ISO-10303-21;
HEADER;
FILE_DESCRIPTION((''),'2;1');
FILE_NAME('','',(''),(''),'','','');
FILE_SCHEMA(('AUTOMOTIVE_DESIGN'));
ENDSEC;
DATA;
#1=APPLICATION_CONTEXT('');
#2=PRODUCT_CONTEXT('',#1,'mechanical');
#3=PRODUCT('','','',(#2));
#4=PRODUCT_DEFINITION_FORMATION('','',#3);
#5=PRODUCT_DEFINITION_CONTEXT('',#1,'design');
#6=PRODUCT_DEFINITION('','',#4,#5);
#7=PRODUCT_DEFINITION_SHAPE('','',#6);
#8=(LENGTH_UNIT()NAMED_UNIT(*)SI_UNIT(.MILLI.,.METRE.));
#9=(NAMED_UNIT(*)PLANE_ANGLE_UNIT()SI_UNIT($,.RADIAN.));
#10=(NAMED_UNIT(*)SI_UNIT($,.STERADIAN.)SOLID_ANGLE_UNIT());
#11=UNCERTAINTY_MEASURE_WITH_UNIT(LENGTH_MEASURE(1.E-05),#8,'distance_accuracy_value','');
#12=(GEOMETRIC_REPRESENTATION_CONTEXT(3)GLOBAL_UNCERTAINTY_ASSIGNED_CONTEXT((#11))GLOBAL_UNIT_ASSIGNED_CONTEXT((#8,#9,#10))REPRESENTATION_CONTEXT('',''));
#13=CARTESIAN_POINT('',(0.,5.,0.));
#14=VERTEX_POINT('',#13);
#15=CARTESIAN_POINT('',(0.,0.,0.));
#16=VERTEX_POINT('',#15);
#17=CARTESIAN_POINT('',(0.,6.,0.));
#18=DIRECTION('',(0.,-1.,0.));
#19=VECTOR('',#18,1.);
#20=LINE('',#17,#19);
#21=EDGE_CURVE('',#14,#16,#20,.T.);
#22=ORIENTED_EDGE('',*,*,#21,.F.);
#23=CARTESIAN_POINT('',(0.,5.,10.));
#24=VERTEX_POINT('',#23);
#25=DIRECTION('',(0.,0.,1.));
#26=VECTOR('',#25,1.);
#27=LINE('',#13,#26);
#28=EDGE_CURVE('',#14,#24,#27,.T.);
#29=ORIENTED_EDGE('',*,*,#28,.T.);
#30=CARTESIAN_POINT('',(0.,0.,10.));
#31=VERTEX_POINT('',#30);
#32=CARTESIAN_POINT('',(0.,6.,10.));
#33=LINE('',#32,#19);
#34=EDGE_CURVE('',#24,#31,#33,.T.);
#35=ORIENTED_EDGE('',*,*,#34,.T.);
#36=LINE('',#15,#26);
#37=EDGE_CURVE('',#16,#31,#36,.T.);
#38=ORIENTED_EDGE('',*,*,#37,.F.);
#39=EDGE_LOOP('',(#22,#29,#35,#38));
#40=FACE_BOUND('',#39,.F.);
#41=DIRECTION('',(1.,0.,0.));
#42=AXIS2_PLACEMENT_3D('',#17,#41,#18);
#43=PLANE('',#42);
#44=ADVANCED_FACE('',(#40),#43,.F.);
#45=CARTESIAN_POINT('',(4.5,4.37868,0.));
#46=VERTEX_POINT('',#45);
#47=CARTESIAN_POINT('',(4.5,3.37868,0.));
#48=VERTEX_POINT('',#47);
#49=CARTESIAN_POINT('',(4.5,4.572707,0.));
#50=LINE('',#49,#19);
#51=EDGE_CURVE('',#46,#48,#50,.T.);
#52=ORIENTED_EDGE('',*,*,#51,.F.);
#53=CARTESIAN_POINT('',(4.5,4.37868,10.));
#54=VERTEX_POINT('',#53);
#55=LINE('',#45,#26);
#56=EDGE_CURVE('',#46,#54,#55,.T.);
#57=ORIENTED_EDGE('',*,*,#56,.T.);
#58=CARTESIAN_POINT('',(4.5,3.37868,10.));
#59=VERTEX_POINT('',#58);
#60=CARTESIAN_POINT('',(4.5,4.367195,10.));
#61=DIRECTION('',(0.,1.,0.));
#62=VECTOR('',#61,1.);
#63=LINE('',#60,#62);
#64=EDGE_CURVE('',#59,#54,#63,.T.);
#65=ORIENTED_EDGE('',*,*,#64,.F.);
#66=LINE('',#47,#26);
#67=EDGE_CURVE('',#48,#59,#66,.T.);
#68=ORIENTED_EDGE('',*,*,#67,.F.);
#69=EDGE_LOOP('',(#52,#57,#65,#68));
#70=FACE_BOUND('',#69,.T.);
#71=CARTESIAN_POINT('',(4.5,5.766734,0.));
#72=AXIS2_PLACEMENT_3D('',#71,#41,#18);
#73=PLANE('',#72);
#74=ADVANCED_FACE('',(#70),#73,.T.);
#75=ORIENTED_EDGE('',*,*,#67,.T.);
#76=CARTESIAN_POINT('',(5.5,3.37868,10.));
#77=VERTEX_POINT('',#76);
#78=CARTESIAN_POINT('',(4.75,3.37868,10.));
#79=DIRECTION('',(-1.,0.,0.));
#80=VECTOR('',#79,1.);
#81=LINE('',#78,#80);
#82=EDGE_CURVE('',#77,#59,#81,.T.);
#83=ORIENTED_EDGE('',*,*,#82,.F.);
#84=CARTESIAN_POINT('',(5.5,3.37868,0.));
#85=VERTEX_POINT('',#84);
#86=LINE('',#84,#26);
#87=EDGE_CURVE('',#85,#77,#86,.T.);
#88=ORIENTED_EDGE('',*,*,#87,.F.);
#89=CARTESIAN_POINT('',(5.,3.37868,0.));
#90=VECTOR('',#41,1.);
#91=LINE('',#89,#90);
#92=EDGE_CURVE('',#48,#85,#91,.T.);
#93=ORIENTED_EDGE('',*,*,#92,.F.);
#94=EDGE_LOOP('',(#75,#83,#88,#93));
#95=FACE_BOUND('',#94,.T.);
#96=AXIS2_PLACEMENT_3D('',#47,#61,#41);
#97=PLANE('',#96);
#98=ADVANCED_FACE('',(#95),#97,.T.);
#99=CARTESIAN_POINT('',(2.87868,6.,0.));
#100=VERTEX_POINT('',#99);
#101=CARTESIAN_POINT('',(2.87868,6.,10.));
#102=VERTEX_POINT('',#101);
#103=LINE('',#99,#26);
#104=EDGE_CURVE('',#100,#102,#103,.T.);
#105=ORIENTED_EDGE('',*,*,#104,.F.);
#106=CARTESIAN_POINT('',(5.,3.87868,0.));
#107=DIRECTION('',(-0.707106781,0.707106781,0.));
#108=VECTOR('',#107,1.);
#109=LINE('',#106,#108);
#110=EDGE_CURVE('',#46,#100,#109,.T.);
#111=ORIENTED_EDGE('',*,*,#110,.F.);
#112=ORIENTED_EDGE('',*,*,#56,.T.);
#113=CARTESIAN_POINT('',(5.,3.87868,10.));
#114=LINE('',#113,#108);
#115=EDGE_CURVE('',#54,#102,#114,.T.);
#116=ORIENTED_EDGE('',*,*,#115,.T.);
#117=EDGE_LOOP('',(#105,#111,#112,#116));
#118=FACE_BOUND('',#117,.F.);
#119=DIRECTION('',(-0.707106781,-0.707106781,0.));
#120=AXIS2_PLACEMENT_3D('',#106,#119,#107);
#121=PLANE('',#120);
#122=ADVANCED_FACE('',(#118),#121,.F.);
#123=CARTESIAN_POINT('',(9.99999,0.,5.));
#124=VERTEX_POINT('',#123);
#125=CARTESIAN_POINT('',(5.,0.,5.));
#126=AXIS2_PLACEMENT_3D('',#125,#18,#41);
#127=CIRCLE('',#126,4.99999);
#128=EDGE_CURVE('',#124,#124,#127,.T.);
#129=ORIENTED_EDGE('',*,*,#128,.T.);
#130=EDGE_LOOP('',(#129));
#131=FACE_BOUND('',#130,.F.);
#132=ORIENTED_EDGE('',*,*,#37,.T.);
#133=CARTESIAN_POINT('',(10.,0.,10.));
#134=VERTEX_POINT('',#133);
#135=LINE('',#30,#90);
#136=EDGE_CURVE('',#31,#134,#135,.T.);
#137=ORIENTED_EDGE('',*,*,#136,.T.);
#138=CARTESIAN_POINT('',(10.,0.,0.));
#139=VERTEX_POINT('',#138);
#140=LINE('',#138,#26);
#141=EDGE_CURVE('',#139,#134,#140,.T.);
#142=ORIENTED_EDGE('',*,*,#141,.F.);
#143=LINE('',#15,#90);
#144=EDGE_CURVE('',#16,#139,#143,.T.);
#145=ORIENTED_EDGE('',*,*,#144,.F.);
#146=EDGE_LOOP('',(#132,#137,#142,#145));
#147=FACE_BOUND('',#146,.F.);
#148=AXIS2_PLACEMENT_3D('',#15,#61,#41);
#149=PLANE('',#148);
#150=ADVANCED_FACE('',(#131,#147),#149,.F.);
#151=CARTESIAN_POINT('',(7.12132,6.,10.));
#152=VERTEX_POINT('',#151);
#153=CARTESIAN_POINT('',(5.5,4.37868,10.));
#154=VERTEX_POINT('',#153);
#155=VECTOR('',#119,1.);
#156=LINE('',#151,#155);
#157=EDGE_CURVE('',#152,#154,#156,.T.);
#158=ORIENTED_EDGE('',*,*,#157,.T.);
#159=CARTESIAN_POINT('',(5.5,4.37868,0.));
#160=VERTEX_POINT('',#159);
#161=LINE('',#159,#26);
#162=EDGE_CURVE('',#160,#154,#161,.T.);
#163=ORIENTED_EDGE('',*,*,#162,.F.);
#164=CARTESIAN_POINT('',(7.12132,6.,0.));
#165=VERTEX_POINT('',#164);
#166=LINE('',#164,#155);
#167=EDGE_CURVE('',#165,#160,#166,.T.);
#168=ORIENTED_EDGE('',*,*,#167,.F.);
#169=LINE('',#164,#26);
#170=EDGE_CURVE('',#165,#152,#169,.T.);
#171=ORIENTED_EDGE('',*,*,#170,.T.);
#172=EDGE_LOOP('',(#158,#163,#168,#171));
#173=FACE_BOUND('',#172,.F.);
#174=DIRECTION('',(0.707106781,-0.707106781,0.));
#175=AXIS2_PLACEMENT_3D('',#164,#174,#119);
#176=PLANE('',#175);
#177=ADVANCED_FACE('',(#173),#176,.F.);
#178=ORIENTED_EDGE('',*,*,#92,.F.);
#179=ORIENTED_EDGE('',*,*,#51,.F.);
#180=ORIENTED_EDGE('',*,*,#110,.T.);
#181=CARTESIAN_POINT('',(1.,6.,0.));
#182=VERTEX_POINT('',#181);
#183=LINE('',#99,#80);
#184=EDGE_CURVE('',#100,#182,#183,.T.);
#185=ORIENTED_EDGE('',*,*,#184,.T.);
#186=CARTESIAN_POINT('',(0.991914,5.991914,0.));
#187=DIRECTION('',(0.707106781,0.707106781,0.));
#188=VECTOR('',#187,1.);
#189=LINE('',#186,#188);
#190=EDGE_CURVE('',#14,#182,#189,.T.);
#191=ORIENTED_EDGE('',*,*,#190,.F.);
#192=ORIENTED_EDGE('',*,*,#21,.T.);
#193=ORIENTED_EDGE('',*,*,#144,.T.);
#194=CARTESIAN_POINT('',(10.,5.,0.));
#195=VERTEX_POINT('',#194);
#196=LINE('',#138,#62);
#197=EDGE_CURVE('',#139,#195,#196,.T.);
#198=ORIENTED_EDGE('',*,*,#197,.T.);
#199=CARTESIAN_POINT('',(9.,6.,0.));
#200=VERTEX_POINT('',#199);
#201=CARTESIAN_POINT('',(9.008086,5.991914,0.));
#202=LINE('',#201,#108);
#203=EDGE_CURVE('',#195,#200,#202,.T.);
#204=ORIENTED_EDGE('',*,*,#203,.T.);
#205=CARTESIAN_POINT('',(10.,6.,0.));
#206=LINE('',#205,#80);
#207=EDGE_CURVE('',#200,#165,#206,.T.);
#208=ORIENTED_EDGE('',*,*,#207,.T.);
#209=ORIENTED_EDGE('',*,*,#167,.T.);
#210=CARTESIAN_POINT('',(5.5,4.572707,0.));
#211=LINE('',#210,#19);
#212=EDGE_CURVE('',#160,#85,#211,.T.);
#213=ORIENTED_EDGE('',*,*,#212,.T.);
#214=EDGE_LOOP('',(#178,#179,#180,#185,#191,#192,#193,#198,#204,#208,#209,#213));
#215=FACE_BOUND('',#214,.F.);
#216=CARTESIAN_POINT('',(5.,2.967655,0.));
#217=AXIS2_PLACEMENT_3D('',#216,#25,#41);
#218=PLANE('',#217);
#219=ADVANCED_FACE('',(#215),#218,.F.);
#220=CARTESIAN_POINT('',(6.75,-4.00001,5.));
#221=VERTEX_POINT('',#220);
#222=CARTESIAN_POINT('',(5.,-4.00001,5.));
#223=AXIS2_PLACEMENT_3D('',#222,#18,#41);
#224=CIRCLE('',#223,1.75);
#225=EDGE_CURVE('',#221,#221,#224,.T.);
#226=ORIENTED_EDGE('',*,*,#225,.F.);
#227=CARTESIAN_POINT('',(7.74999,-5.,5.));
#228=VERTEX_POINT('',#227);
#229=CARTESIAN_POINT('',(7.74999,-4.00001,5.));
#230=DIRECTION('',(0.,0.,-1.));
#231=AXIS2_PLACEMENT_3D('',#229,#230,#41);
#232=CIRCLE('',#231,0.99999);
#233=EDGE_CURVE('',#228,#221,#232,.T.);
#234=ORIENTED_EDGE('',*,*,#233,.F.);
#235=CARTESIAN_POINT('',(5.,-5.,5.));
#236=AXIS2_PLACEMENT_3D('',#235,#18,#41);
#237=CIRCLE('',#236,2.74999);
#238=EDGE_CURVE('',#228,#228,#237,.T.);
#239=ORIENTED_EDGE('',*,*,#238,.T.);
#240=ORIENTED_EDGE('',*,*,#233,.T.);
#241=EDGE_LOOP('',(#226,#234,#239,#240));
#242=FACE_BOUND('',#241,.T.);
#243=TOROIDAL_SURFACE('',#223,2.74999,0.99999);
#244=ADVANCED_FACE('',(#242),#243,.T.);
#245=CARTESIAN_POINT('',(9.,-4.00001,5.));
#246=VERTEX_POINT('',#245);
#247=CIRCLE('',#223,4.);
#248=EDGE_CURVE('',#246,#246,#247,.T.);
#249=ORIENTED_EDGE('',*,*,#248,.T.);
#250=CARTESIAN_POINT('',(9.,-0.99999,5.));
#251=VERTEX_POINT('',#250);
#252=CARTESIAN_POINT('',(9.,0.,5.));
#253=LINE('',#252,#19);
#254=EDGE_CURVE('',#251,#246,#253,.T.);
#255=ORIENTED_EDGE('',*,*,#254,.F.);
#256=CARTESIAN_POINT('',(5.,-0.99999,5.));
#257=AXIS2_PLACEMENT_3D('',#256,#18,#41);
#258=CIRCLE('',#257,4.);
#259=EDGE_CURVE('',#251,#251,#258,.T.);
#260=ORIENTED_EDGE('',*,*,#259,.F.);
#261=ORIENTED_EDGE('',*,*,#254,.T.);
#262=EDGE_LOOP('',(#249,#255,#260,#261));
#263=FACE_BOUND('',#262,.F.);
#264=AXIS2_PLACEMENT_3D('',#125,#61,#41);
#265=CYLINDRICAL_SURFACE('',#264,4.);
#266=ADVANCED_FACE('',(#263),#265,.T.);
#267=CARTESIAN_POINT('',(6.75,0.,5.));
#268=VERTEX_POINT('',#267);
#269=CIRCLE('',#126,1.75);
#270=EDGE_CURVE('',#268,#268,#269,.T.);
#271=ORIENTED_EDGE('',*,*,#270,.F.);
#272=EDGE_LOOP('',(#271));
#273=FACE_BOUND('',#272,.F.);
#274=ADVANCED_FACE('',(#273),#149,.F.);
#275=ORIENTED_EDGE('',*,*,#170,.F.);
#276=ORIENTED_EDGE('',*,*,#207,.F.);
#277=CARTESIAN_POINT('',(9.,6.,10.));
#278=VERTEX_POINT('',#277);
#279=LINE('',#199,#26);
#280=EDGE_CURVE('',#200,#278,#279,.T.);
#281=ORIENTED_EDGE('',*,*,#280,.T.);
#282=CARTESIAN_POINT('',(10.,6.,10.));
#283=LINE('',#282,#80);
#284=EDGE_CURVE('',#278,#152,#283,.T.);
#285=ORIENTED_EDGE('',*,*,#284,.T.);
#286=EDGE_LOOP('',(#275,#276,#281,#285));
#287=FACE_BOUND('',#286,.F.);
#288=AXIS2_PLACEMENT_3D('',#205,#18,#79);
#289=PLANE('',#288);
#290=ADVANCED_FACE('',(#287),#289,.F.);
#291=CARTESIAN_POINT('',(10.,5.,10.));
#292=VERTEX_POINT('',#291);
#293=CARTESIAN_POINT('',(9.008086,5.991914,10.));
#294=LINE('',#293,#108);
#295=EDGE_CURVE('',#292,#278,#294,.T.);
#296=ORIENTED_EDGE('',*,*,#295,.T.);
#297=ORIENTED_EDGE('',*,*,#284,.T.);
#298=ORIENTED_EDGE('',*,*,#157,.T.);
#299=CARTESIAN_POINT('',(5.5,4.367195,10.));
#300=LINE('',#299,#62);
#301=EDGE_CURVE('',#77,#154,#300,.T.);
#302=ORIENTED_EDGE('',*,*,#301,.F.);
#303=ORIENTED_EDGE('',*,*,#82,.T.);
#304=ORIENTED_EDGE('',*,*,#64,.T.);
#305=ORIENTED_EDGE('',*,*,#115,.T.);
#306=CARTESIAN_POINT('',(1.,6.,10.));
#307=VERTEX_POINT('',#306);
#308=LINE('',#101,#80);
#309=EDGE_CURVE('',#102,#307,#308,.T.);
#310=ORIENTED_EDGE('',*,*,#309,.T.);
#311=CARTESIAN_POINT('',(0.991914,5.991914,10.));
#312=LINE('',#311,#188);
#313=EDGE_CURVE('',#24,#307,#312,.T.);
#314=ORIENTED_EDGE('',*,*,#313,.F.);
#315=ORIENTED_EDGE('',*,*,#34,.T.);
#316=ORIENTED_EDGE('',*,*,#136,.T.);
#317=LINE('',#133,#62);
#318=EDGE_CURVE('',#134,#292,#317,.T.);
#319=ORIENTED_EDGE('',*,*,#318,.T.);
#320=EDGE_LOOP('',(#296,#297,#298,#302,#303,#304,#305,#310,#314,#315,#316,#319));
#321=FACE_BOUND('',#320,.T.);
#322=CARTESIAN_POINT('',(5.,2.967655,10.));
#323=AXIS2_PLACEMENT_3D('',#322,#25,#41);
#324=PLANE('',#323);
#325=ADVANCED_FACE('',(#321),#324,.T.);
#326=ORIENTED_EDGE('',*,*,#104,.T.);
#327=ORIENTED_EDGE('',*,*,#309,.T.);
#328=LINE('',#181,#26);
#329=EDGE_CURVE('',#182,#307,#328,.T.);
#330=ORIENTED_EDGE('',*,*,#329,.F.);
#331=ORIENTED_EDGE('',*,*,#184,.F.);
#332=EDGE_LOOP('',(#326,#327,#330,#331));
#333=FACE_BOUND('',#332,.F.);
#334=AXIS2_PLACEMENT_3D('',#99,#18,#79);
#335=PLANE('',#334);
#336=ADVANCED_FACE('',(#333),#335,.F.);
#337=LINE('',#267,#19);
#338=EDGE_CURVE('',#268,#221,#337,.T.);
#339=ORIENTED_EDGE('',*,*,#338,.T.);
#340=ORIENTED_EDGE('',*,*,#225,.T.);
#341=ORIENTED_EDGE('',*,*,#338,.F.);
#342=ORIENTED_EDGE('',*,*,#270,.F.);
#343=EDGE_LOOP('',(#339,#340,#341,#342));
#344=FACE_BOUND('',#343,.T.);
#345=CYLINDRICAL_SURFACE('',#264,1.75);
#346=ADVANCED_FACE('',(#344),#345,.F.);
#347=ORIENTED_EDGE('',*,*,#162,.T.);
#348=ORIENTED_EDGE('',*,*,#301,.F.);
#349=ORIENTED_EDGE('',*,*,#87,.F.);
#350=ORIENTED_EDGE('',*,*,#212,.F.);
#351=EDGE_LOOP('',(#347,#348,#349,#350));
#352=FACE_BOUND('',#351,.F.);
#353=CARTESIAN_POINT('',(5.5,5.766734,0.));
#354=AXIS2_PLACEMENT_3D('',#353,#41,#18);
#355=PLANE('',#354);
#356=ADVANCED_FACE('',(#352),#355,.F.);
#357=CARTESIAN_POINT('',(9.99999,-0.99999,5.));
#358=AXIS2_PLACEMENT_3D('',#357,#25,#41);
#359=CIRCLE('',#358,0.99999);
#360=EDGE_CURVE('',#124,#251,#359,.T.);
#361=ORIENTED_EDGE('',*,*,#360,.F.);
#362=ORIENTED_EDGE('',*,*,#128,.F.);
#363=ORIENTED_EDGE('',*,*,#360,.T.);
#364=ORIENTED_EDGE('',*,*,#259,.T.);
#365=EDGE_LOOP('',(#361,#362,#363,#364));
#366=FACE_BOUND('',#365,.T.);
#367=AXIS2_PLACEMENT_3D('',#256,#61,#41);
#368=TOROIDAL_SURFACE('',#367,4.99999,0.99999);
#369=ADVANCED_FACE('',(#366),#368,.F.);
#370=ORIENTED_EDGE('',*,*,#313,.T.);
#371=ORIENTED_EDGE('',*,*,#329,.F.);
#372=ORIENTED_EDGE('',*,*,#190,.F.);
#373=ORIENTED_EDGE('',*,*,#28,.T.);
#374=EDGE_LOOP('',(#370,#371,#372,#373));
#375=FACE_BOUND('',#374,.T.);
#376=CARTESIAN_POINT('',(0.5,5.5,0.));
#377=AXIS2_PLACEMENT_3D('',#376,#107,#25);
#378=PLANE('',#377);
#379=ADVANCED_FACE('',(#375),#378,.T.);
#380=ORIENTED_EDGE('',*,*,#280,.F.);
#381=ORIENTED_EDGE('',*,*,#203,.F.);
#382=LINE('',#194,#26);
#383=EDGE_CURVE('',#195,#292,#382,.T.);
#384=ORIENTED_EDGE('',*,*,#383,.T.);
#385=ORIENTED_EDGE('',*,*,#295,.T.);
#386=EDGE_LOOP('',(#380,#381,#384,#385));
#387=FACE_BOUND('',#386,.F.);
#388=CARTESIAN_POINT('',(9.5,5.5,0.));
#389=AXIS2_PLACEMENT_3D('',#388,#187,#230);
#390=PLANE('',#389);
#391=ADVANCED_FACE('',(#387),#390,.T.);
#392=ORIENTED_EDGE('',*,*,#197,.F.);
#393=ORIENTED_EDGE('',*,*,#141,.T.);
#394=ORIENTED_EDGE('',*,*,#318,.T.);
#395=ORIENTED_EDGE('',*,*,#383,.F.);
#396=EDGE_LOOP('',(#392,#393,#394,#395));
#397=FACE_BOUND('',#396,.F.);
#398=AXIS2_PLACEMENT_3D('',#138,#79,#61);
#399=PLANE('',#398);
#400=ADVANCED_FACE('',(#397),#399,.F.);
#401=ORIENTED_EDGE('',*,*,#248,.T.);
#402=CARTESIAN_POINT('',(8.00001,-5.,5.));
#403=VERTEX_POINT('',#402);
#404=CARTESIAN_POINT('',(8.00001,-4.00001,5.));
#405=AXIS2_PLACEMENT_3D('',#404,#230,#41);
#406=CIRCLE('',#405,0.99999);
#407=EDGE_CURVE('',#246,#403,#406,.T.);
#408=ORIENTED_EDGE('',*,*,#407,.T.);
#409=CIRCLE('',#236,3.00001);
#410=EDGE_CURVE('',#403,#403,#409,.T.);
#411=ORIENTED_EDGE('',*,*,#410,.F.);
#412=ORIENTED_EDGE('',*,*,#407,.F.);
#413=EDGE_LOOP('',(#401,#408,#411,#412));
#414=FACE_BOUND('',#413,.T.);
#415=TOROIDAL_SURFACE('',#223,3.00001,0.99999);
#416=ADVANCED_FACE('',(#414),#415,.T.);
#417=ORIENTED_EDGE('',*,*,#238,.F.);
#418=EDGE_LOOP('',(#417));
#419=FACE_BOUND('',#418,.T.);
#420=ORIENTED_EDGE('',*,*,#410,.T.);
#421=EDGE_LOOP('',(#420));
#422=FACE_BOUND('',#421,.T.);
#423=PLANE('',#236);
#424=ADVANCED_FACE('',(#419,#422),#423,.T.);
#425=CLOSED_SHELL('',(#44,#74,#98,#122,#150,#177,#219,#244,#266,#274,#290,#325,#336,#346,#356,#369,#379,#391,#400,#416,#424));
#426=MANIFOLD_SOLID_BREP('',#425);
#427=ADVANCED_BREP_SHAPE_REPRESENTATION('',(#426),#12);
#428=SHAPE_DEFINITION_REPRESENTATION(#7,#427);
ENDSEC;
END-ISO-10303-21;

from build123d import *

# Parameters (mm, degrees)
F1_DEPTH = 10
F2_R     = 4
F2_R_2   = 1.75
F3_DEPTH = 5
F4_SIZE  = 1
F5_W     = 1
F5_H     = 2.3880545414
F6_DEPTH = 25
F7_R     = 0.99999


# Not quite as in the source:
# - a fillet or chamfer is up to 0.001 mm smaller than in the source, because OpenCascade refuses the exact size


with BuildPart() as f1:
    # F0 (on Top) → F1 (new body)
    with BuildSketch(Plane.XY):
        Polygon((0, 6), (0, 0), (10, 0), (10, 6), (7.1213203436, 6), (5, 3.8786796564), (2.8786796564, 6), align=None)
    extrude(amount=F1_DEPTH)

    # F2 (on face) → F3 (join)
    with BuildSketch(Plane.XZ):
        with Locations((5, 5)):
            Circle(F2_R)
        with Locations((5, 5)):
            Circle(F2_R_2, mode=Mode.SUBTRACT)
    extrude(amount=F3_DEPTH)

    # F4
    f4_edges = [f1.edges().sort_by_distance(p)[0] for p in [
        (10, 6, 5),
        (0, 6, 5),
    ]]
    chamfer(f4_edges, length=F4_SIZE)

    # F5 (on face) → F6 (cut)
    with BuildSketch(Plane(origin=(0, 0, 0), x_dir=(1, 0, 0), z_dir=(0, 0, -1))):
        with Locations((5, -4.5727069271)):
            Rectangle(F5_W, F5_H)
    extrude(amount=-F6_DEPTH, mode=Mode.SUBTRACT)

    # F7 (radius 1 in the source; OpenCascade refuses exactly that, so slightly less here)
    f7_edges = [f1.edges().sort_by_distance(p)[0] for p in [
        (1, 0, 5),
        (1, -5, 5),
        (3.25, -5, 5),
    ]]
    fillet(f7_edges, radius=F7_R)


solid = f1.part
